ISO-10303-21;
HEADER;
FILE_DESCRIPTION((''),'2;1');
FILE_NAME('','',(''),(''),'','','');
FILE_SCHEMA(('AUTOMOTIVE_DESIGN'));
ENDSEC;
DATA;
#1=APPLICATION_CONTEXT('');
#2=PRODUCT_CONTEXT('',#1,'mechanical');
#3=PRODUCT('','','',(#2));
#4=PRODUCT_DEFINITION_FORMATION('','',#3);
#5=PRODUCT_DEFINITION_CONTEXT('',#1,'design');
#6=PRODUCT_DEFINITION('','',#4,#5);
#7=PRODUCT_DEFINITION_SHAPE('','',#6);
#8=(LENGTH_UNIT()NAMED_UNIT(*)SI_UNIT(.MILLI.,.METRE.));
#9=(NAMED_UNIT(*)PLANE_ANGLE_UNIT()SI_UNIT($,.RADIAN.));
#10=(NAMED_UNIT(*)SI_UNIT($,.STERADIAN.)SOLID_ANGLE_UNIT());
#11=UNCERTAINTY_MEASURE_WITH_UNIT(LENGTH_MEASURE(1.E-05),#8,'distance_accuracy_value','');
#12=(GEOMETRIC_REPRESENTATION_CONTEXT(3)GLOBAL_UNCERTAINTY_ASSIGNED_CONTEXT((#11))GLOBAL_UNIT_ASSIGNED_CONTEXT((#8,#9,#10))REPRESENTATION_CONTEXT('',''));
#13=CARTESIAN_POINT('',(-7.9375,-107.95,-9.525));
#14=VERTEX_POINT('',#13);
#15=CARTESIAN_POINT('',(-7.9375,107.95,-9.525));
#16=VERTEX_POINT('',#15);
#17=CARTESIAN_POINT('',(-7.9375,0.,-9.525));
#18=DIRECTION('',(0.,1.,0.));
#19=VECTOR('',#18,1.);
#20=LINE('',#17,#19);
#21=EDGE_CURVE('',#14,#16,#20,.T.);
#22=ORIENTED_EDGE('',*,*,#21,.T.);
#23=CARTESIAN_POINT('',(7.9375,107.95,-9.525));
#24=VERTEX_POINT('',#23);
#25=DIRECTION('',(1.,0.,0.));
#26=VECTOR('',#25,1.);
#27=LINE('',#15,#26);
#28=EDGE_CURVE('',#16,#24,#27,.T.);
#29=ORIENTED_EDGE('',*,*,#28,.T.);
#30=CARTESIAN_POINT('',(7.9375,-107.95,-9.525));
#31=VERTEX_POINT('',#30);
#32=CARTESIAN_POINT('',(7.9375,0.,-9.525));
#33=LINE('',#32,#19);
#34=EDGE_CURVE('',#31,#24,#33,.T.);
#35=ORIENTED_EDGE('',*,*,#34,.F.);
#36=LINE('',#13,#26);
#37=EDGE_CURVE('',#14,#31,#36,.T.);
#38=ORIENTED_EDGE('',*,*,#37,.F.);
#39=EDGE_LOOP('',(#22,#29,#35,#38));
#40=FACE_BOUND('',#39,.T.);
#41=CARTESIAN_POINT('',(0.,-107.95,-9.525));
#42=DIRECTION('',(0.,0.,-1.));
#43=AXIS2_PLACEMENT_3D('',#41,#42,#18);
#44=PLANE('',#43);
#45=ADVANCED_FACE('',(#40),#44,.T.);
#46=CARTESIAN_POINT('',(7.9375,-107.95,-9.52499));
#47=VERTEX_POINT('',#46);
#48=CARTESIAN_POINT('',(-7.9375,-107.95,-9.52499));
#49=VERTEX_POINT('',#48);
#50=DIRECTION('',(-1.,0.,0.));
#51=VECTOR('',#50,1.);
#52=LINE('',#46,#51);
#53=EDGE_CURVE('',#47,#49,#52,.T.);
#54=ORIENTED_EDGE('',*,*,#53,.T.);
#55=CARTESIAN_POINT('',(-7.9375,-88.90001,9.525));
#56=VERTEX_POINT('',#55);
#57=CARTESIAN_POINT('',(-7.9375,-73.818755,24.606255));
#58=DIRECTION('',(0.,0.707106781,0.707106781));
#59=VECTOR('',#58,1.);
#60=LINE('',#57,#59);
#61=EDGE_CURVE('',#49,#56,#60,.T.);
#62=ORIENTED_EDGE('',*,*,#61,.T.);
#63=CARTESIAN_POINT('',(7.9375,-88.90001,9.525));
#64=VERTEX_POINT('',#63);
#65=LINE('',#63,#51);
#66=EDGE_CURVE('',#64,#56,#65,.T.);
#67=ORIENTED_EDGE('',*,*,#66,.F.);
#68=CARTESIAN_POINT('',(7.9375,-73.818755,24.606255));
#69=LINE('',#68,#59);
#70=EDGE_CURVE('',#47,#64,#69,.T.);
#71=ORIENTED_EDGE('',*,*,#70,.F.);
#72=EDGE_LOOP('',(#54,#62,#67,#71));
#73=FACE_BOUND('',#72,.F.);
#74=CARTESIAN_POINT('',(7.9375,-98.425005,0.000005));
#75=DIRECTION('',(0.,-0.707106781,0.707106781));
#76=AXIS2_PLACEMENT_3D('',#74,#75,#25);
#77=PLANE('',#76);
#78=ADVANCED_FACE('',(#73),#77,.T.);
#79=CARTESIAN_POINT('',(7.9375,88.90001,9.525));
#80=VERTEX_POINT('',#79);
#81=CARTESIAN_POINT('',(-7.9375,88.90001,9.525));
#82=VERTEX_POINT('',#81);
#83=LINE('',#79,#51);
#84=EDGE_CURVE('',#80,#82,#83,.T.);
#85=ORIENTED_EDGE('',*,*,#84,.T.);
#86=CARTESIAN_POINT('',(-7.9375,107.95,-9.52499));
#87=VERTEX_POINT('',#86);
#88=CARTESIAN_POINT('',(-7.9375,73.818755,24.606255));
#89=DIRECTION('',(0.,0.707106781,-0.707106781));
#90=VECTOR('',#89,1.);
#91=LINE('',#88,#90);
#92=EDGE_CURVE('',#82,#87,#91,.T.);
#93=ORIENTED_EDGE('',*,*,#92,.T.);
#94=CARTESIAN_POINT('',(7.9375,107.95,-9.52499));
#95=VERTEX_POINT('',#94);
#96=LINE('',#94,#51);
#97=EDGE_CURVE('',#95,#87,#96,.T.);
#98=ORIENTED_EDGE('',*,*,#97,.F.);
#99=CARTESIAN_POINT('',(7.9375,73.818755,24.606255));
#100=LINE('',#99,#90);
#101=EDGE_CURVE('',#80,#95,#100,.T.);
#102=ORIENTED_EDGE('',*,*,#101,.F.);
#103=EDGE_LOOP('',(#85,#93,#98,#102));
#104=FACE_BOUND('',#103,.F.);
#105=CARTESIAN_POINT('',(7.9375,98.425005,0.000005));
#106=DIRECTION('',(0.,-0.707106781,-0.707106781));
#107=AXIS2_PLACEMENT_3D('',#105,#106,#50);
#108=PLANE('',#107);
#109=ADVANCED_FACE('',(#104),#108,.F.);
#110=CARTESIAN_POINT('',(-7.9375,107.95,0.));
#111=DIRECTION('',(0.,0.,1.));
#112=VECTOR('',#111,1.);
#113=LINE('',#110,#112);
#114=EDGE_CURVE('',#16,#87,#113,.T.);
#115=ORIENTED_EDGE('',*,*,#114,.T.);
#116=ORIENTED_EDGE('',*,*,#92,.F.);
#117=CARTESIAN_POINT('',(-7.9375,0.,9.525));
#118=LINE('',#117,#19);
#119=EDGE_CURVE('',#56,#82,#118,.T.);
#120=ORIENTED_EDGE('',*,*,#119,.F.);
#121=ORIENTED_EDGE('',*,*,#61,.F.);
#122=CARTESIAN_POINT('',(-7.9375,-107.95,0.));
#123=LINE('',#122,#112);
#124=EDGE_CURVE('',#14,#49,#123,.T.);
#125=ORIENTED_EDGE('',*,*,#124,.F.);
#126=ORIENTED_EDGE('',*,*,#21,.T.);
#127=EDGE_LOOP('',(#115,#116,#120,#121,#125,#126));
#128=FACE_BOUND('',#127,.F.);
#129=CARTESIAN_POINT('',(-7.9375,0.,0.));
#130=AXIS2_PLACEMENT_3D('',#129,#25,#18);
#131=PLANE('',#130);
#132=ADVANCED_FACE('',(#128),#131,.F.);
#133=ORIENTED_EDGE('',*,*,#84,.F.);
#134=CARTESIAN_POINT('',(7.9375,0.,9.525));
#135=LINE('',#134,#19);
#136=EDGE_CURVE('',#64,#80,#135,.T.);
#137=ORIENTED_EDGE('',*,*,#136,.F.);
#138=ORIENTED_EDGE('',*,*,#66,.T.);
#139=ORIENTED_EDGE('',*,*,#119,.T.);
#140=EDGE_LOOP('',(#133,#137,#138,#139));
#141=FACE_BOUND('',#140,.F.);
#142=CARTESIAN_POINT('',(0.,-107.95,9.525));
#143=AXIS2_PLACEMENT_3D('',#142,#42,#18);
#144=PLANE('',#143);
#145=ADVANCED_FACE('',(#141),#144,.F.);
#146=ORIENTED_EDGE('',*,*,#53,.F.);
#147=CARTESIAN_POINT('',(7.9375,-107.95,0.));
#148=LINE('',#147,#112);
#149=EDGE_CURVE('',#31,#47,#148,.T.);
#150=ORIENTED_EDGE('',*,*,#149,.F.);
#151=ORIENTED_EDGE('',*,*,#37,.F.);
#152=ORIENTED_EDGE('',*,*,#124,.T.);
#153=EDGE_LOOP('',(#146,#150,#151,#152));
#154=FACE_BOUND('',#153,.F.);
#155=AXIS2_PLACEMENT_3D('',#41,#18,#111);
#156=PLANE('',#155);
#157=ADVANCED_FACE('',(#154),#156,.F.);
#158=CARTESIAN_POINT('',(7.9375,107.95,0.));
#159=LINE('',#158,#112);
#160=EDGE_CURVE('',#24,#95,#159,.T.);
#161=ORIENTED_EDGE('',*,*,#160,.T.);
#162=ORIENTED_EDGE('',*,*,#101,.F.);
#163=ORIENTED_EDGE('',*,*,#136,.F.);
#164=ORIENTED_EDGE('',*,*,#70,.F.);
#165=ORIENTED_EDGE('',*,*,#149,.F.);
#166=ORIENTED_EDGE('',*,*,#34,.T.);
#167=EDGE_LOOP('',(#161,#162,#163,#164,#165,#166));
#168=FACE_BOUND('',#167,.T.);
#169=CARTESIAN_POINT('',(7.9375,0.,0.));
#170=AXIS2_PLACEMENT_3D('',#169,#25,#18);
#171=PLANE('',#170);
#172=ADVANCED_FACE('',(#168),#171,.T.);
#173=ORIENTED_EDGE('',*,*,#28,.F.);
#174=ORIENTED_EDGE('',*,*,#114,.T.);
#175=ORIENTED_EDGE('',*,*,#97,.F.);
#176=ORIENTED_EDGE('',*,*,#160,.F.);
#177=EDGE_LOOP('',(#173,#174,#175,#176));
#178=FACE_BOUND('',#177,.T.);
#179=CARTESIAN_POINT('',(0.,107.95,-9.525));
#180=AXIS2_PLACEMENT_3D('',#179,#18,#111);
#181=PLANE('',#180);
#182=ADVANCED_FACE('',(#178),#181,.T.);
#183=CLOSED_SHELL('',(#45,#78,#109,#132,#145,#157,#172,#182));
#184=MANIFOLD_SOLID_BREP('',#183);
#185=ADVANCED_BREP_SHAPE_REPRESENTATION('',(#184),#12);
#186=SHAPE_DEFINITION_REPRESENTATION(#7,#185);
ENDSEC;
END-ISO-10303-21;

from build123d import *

# Parameters (mm, degrees)
F0_W     = 215.9
F0_H     = 19.05
F1_DEPTH = 7.9375
F2_SIZE2 = 19.04999
F2_SIZE  = 19.04999
F3_SIZE2 = 19.04999
F3_SIZE  = 19.04999


# Not quite as in the source:
# - a fillet or chamfer is up to 0.001 mm smaller than in the source, because OpenCascade refuses the exact size


with BuildPart() as f1:
    # F0 (on Right) → F1 (new body, symmetric)
    with BuildSketch(Plane.YZ):
        Rectangle(F0_W, F0_H)
    extrude(amount=F1_DEPTH, both=True)

    # F2 (size 19.05 and 19.05 in the source; OpenCascade refuses exactly that, so slightly less here)
    f2_edges = [f1.edges().sort_by_distance(p)[0] for p in [
        (0, -107.95, 9.525),
    ]]
    chamfer(f2_edges, length=F2_SIZE, length2=F2_SIZE2)

    # F3 (size 19.05 and 19.05 in the source; OpenCascade refuses exactly that, so slightly less here)
    f3_edges = [f1.edges().sort_by_distance(p)[0] for p in [
        (0, 107.95, 9.525),
    ]]
    chamfer(f3_edges, length=F3_SIZE, length2=F3_SIZE2)


solid = f1.part
